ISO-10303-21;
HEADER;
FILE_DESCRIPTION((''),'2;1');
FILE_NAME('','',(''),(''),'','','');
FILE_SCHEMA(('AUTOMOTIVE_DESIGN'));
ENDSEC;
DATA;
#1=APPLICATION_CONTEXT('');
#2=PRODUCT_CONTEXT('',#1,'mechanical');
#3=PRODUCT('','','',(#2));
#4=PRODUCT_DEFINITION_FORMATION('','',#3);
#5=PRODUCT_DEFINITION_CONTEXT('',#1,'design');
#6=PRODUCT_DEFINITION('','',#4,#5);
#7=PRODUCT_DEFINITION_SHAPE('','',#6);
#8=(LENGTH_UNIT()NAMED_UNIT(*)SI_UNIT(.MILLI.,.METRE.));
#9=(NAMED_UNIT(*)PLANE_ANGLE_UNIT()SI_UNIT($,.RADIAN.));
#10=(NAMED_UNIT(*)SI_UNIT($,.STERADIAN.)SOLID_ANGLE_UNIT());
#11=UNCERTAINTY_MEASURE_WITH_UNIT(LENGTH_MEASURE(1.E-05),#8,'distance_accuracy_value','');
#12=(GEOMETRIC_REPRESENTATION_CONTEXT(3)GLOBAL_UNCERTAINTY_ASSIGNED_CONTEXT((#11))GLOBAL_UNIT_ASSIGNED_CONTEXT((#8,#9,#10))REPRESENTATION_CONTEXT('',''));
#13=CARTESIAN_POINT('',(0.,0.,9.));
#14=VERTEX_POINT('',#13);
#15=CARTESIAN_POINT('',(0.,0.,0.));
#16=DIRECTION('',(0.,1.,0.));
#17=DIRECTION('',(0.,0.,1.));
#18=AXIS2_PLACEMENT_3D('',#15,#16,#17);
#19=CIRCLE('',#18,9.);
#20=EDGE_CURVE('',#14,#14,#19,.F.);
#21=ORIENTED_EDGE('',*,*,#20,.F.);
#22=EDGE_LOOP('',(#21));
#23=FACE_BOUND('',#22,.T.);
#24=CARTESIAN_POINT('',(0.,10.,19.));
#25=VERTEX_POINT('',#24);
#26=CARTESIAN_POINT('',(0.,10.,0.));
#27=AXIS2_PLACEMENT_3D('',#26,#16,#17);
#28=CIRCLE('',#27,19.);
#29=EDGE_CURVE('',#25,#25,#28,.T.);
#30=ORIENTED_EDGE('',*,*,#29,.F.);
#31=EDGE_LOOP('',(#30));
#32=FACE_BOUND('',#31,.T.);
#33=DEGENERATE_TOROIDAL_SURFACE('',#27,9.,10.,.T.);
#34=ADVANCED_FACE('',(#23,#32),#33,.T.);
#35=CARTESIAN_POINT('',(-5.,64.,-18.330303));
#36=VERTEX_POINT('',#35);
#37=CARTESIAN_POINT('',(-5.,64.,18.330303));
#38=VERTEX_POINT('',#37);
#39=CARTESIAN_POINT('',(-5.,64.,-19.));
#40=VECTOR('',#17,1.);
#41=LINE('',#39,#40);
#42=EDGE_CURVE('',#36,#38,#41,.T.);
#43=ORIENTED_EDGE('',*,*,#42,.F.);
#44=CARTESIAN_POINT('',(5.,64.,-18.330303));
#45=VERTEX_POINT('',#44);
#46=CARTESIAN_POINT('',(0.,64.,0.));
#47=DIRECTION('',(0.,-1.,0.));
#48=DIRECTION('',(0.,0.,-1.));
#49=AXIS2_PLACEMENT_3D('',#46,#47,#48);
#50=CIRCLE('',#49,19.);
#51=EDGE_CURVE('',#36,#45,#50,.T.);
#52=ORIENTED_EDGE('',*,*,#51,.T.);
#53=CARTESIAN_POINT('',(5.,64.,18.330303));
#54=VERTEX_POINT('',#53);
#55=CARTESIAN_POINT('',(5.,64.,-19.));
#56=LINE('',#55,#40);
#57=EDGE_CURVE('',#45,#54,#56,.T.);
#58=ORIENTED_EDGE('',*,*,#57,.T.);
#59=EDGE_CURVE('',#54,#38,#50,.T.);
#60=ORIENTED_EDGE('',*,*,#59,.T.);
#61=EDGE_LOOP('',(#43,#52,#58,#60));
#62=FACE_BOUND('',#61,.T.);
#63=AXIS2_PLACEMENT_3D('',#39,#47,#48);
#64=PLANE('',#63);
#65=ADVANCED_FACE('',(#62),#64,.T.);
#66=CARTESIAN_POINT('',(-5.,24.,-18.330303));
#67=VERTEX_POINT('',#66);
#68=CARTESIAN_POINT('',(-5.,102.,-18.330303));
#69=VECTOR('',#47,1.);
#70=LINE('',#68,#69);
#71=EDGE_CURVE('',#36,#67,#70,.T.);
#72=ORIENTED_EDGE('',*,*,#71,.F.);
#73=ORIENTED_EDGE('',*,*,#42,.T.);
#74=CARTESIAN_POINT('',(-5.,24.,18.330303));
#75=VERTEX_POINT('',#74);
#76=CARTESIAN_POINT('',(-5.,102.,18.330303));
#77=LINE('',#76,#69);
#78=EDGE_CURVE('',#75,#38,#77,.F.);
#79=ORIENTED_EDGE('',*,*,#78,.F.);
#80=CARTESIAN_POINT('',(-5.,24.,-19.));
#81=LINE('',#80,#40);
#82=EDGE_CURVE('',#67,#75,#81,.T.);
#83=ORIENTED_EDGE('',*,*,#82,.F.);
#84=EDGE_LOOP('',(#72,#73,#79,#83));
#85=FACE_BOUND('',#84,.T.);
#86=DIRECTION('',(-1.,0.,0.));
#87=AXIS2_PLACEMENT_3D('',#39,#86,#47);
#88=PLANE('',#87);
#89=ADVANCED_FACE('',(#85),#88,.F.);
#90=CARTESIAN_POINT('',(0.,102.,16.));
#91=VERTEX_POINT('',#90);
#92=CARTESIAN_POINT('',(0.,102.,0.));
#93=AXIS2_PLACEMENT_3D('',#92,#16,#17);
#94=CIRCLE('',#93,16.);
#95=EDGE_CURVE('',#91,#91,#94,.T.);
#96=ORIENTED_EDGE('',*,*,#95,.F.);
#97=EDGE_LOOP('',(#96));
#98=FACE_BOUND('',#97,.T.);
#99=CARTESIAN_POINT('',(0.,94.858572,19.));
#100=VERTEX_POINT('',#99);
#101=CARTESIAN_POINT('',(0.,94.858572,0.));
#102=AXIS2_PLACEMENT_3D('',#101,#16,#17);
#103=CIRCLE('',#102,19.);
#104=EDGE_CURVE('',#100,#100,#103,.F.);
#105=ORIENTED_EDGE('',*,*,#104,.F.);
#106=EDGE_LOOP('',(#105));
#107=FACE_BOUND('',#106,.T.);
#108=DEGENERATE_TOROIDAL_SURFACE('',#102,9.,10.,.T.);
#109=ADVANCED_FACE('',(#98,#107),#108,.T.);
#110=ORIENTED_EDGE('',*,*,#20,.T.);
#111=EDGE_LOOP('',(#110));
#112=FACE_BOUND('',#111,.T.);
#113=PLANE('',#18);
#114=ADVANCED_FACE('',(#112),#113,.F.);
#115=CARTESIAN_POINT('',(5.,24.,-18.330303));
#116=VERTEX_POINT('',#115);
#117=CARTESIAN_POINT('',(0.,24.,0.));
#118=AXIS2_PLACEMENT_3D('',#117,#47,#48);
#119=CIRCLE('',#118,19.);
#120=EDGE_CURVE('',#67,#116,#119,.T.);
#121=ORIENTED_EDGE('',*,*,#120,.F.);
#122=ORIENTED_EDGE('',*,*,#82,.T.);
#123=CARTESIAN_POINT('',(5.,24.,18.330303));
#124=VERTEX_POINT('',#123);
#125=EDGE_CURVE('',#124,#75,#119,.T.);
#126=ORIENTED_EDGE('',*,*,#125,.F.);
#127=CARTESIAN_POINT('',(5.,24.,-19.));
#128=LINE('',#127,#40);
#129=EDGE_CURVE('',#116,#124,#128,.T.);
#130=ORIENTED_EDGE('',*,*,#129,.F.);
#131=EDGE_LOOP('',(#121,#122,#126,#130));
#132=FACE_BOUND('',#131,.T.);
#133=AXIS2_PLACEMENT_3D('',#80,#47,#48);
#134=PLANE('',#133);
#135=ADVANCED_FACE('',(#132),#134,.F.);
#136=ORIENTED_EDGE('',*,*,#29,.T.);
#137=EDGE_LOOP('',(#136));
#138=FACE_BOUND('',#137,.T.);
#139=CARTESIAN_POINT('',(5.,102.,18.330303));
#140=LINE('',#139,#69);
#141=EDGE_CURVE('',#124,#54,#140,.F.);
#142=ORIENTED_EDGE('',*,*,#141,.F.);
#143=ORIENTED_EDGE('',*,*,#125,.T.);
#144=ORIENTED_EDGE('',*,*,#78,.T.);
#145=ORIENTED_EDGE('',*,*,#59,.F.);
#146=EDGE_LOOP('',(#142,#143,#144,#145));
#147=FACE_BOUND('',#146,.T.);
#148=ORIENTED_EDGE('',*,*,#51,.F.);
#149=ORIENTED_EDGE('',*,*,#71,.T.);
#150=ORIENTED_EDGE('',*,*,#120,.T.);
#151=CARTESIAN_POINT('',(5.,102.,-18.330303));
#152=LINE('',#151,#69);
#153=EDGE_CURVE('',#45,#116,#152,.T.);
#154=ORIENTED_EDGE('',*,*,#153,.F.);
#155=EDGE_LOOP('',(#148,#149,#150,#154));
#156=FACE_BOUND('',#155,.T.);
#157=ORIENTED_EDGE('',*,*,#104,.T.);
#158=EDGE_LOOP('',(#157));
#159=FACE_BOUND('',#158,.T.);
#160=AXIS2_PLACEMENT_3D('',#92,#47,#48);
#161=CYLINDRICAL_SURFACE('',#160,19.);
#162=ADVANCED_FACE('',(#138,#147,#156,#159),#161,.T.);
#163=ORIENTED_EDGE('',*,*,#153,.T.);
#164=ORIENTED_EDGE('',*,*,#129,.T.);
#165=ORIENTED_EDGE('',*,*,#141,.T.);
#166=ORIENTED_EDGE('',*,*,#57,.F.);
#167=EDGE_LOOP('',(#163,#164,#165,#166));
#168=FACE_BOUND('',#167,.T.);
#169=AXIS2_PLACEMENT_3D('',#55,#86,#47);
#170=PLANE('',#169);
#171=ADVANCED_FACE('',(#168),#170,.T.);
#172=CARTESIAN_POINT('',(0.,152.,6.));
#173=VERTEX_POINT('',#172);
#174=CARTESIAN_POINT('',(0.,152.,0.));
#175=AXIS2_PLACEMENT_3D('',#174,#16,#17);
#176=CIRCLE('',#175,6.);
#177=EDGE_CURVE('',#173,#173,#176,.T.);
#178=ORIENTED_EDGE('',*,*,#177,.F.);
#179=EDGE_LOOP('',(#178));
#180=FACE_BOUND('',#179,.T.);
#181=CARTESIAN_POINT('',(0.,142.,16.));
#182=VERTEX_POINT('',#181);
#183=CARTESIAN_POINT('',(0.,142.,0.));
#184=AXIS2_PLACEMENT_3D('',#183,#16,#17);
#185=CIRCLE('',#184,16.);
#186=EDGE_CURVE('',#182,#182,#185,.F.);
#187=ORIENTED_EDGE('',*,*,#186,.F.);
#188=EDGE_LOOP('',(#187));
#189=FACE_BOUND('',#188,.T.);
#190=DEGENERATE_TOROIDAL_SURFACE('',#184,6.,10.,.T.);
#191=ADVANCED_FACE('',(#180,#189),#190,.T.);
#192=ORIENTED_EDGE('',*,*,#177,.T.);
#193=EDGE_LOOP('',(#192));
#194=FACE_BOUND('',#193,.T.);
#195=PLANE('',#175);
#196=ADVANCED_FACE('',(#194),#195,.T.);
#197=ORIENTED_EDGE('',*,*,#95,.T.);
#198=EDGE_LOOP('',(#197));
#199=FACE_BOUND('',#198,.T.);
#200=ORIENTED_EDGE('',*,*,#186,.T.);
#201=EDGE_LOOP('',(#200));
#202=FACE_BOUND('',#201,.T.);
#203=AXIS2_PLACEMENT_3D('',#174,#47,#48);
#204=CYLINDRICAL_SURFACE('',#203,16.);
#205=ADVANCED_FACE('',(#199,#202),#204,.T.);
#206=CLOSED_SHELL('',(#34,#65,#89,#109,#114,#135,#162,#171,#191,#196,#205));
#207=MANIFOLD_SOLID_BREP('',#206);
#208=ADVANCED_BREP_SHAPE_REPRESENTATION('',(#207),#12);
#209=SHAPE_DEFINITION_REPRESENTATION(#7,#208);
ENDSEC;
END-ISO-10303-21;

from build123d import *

# Parameters (mm, degrees)
SKETCH1_R               = 19
BOSS_EXTRUDE3_DEPTH     = 102
SKETCH2_R               = 16
BOSS_EXTRUDE4_DEPTH     = 50
FILLET1_R               = 10
FILLET2_R               = 10
FILLET3_R               = 10
CUT_EXTRUDE1_DEPTH      = 155.356729713
CUT_EXTRUDE1_DEPTH_BACK = 155.356729713
SKETCH3_W               = 10
SKETCH3_H               = 40


with BuildPart() as part:
    # Sketch1 → Boss-Extrude3 (new body)
    with BuildSketch(Plane(origin=(0, 0, 0), x_dir=(1, 0, 0), z_dir=(0, 1, 0))):
        with Locations(Location((0, 0, 0), (0, 0, 270))):
            Circle(SKETCH1_R)
    extrude(amount=BOSS_EXTRUDE3_DEPTH)

    # Sketch2 → Boss-Extrude4 (add)
    with BuildSketch(Plane(origin=(0, 102, 0), x_dir=(1, 0, 0), z_dir=(0, 1, 0))):
        with Locations(Location((0, 0, 0), (0, 0, 270))):
            Circle(SKETCH2_R)
    extrude(amount=BOSS_EXTRUDE4_DEPTH)

    # Fillet1
    # the kernel refuses this fillet: 10 mm, written as the material it takes off along each edge
    with BuildSketch(Plane(origin=(0, 102, 0), x_dir=(0, 0, 1), z_dir=(-1, 0, 0))) as fillet1_piece_1:
        with BuildLine():
            CenterArc((9, -7.141428429), FILLET1_R, 0, 45.572995999)
            Line((16, 0), (16.14, 0.142828569))
            ThreePointArc((16.14, 0.142828569), (17.5, 0.2), (19, 0.2))
            Line((19, 0.2), (19.2, 0))
            Line((19.2, 0), (19.2, -7.141428429))
            Line((19.2, -7.141428429), (19, -7.141428429))
        make_face()
    revolve(axis=Axis((0, 102, 0), (0, 1, 0)), mode=Mode.SUBTRACT)

    # Fillet2
    fillet2_edges = [part.edges().sort_by_distance(p)[0] for p in [
        (0, 152, -16),
    ]]
    fillet(fillet2_edges, radius=FILLET2_R)

    # Fillet3
    fillet3_edges = [part.edges().sort_by_distance(p)[0] for p in [
        (0, 0, -19),
    ]]
    fillet(fillet3_edges, radius=FILLET3_R)

    # Sketch3 → Cut-Extrude1 (cut, two sides: drawn at the far end of the back side and taken through both)
    with BuildSketch(Plane.XY.offset(-CUT_EXTRUDE1_DEPTH_BACK)):
        with Locations((0, 44)):
            Rectangle(SKETCH3_W, SKETCH3_H)
    extrude(amount=CUT_EXTRUDE1_DEPTH + CUT_EXTRUDE1_DEPTH_BACK, mode=Mode.SUBTRACT)


solid = part.part
